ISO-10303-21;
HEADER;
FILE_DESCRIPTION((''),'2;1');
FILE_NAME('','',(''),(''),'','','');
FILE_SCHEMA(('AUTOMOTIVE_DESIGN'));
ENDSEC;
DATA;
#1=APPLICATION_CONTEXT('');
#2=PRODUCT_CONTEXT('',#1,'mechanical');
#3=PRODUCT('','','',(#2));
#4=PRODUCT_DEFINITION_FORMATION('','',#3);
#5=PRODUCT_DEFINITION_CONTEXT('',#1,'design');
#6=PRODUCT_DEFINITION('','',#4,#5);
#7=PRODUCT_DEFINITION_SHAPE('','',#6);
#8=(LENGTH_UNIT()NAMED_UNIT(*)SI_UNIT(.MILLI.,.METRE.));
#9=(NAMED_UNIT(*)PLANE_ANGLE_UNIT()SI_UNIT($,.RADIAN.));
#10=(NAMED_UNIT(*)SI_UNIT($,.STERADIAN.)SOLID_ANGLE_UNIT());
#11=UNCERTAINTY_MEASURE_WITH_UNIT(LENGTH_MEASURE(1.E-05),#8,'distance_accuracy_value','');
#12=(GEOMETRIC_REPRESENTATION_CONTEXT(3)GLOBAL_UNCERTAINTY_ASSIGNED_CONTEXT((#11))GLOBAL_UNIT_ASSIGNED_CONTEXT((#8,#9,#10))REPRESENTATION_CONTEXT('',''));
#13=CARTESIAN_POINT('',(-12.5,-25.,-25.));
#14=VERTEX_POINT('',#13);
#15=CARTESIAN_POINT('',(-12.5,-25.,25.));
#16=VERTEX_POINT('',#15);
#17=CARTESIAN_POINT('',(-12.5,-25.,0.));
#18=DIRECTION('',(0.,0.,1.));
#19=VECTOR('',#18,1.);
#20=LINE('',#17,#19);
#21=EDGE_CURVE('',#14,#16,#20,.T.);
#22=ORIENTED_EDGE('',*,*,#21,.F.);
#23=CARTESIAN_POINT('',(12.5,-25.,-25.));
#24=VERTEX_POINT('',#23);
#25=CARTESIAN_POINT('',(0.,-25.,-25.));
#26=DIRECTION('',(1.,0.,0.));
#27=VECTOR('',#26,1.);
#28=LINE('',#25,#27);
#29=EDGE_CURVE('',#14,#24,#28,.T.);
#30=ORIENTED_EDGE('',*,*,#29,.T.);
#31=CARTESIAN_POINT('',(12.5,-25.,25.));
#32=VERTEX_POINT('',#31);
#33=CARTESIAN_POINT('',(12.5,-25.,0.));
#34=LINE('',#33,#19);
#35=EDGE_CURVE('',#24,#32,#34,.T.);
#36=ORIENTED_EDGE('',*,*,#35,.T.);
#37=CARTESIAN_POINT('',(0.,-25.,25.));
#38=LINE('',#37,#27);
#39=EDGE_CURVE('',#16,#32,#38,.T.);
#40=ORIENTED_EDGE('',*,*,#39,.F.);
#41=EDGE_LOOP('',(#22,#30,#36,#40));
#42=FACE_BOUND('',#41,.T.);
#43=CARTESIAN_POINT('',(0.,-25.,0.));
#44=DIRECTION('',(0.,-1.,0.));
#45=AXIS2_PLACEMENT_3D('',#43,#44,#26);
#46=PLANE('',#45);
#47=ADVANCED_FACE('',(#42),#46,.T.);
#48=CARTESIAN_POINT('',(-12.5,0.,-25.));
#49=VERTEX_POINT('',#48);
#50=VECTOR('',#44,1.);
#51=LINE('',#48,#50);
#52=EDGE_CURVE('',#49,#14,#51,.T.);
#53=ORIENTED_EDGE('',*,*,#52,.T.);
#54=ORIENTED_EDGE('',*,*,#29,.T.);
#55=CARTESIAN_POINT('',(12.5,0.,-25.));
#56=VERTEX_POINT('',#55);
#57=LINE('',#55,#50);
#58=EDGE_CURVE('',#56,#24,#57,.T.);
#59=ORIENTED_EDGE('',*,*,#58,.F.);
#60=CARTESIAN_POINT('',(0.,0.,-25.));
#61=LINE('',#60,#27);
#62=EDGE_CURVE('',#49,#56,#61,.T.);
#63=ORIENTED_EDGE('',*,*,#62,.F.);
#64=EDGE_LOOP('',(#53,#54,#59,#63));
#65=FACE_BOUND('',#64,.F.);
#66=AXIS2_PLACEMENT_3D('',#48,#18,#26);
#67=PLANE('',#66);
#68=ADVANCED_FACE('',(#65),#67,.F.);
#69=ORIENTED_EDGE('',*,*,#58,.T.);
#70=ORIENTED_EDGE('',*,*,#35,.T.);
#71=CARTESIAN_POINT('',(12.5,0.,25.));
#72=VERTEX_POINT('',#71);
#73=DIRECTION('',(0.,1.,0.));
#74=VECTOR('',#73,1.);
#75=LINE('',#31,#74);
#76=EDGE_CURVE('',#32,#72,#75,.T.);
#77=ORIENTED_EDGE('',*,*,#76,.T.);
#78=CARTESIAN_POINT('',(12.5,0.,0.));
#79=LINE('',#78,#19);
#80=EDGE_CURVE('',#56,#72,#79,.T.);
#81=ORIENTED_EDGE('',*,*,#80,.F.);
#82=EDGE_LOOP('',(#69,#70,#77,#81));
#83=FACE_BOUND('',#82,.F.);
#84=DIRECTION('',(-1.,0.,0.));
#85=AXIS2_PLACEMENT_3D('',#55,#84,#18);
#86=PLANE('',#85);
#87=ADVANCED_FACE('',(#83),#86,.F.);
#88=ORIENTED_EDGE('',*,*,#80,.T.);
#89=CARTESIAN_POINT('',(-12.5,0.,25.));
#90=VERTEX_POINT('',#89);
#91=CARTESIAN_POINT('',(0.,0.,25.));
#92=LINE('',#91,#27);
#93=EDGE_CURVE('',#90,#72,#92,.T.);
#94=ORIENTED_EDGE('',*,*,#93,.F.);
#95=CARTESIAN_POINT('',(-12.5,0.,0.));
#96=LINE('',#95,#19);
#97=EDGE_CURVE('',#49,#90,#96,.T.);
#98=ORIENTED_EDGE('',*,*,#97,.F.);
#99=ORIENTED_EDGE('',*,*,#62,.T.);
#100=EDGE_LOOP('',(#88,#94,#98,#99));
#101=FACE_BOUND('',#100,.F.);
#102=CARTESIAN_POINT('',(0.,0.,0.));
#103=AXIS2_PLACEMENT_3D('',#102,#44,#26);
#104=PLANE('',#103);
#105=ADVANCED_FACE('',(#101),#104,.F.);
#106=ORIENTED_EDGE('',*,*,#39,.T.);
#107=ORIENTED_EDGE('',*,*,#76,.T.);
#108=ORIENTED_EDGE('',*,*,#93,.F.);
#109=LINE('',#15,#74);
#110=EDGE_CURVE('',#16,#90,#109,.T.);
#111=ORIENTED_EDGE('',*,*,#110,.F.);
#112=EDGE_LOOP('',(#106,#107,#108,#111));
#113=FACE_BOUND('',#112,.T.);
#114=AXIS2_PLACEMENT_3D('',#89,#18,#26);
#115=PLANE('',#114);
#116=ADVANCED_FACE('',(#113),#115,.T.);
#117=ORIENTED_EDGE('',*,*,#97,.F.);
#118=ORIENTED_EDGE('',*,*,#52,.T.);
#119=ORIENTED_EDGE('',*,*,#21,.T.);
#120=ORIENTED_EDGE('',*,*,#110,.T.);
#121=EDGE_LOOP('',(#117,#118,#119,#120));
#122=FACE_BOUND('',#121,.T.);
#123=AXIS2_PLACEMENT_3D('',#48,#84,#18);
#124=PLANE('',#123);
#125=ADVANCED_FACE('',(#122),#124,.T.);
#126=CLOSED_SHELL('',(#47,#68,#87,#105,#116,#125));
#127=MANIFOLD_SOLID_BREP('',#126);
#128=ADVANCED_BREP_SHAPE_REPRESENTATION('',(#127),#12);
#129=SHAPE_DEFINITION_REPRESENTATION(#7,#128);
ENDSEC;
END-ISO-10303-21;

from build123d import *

# Parameters (mm, degrees)
F0_W     = 25
F0_H     = 50
F1_DEPTH = 25
F3_DEPTH = 10


# Not quite as in the source:
# - a feature names something its author has since deleted; it is built from what else it names


with BuildPart() as f1:
    # F0 (on Front) → F1 (new body)
    with BuildSketch(Plane.XZ):
        Rectangle(F0_W, F0_H)
    extrude(amount=F1_DEPTH)

    # F0 (on Front) → F3 (join)
    with BuildSketch(Plane.XZ):
        Rectangle(F0_W, F0_H)
    extrude(amount=F3_DEPTH)


solid = f1.part
